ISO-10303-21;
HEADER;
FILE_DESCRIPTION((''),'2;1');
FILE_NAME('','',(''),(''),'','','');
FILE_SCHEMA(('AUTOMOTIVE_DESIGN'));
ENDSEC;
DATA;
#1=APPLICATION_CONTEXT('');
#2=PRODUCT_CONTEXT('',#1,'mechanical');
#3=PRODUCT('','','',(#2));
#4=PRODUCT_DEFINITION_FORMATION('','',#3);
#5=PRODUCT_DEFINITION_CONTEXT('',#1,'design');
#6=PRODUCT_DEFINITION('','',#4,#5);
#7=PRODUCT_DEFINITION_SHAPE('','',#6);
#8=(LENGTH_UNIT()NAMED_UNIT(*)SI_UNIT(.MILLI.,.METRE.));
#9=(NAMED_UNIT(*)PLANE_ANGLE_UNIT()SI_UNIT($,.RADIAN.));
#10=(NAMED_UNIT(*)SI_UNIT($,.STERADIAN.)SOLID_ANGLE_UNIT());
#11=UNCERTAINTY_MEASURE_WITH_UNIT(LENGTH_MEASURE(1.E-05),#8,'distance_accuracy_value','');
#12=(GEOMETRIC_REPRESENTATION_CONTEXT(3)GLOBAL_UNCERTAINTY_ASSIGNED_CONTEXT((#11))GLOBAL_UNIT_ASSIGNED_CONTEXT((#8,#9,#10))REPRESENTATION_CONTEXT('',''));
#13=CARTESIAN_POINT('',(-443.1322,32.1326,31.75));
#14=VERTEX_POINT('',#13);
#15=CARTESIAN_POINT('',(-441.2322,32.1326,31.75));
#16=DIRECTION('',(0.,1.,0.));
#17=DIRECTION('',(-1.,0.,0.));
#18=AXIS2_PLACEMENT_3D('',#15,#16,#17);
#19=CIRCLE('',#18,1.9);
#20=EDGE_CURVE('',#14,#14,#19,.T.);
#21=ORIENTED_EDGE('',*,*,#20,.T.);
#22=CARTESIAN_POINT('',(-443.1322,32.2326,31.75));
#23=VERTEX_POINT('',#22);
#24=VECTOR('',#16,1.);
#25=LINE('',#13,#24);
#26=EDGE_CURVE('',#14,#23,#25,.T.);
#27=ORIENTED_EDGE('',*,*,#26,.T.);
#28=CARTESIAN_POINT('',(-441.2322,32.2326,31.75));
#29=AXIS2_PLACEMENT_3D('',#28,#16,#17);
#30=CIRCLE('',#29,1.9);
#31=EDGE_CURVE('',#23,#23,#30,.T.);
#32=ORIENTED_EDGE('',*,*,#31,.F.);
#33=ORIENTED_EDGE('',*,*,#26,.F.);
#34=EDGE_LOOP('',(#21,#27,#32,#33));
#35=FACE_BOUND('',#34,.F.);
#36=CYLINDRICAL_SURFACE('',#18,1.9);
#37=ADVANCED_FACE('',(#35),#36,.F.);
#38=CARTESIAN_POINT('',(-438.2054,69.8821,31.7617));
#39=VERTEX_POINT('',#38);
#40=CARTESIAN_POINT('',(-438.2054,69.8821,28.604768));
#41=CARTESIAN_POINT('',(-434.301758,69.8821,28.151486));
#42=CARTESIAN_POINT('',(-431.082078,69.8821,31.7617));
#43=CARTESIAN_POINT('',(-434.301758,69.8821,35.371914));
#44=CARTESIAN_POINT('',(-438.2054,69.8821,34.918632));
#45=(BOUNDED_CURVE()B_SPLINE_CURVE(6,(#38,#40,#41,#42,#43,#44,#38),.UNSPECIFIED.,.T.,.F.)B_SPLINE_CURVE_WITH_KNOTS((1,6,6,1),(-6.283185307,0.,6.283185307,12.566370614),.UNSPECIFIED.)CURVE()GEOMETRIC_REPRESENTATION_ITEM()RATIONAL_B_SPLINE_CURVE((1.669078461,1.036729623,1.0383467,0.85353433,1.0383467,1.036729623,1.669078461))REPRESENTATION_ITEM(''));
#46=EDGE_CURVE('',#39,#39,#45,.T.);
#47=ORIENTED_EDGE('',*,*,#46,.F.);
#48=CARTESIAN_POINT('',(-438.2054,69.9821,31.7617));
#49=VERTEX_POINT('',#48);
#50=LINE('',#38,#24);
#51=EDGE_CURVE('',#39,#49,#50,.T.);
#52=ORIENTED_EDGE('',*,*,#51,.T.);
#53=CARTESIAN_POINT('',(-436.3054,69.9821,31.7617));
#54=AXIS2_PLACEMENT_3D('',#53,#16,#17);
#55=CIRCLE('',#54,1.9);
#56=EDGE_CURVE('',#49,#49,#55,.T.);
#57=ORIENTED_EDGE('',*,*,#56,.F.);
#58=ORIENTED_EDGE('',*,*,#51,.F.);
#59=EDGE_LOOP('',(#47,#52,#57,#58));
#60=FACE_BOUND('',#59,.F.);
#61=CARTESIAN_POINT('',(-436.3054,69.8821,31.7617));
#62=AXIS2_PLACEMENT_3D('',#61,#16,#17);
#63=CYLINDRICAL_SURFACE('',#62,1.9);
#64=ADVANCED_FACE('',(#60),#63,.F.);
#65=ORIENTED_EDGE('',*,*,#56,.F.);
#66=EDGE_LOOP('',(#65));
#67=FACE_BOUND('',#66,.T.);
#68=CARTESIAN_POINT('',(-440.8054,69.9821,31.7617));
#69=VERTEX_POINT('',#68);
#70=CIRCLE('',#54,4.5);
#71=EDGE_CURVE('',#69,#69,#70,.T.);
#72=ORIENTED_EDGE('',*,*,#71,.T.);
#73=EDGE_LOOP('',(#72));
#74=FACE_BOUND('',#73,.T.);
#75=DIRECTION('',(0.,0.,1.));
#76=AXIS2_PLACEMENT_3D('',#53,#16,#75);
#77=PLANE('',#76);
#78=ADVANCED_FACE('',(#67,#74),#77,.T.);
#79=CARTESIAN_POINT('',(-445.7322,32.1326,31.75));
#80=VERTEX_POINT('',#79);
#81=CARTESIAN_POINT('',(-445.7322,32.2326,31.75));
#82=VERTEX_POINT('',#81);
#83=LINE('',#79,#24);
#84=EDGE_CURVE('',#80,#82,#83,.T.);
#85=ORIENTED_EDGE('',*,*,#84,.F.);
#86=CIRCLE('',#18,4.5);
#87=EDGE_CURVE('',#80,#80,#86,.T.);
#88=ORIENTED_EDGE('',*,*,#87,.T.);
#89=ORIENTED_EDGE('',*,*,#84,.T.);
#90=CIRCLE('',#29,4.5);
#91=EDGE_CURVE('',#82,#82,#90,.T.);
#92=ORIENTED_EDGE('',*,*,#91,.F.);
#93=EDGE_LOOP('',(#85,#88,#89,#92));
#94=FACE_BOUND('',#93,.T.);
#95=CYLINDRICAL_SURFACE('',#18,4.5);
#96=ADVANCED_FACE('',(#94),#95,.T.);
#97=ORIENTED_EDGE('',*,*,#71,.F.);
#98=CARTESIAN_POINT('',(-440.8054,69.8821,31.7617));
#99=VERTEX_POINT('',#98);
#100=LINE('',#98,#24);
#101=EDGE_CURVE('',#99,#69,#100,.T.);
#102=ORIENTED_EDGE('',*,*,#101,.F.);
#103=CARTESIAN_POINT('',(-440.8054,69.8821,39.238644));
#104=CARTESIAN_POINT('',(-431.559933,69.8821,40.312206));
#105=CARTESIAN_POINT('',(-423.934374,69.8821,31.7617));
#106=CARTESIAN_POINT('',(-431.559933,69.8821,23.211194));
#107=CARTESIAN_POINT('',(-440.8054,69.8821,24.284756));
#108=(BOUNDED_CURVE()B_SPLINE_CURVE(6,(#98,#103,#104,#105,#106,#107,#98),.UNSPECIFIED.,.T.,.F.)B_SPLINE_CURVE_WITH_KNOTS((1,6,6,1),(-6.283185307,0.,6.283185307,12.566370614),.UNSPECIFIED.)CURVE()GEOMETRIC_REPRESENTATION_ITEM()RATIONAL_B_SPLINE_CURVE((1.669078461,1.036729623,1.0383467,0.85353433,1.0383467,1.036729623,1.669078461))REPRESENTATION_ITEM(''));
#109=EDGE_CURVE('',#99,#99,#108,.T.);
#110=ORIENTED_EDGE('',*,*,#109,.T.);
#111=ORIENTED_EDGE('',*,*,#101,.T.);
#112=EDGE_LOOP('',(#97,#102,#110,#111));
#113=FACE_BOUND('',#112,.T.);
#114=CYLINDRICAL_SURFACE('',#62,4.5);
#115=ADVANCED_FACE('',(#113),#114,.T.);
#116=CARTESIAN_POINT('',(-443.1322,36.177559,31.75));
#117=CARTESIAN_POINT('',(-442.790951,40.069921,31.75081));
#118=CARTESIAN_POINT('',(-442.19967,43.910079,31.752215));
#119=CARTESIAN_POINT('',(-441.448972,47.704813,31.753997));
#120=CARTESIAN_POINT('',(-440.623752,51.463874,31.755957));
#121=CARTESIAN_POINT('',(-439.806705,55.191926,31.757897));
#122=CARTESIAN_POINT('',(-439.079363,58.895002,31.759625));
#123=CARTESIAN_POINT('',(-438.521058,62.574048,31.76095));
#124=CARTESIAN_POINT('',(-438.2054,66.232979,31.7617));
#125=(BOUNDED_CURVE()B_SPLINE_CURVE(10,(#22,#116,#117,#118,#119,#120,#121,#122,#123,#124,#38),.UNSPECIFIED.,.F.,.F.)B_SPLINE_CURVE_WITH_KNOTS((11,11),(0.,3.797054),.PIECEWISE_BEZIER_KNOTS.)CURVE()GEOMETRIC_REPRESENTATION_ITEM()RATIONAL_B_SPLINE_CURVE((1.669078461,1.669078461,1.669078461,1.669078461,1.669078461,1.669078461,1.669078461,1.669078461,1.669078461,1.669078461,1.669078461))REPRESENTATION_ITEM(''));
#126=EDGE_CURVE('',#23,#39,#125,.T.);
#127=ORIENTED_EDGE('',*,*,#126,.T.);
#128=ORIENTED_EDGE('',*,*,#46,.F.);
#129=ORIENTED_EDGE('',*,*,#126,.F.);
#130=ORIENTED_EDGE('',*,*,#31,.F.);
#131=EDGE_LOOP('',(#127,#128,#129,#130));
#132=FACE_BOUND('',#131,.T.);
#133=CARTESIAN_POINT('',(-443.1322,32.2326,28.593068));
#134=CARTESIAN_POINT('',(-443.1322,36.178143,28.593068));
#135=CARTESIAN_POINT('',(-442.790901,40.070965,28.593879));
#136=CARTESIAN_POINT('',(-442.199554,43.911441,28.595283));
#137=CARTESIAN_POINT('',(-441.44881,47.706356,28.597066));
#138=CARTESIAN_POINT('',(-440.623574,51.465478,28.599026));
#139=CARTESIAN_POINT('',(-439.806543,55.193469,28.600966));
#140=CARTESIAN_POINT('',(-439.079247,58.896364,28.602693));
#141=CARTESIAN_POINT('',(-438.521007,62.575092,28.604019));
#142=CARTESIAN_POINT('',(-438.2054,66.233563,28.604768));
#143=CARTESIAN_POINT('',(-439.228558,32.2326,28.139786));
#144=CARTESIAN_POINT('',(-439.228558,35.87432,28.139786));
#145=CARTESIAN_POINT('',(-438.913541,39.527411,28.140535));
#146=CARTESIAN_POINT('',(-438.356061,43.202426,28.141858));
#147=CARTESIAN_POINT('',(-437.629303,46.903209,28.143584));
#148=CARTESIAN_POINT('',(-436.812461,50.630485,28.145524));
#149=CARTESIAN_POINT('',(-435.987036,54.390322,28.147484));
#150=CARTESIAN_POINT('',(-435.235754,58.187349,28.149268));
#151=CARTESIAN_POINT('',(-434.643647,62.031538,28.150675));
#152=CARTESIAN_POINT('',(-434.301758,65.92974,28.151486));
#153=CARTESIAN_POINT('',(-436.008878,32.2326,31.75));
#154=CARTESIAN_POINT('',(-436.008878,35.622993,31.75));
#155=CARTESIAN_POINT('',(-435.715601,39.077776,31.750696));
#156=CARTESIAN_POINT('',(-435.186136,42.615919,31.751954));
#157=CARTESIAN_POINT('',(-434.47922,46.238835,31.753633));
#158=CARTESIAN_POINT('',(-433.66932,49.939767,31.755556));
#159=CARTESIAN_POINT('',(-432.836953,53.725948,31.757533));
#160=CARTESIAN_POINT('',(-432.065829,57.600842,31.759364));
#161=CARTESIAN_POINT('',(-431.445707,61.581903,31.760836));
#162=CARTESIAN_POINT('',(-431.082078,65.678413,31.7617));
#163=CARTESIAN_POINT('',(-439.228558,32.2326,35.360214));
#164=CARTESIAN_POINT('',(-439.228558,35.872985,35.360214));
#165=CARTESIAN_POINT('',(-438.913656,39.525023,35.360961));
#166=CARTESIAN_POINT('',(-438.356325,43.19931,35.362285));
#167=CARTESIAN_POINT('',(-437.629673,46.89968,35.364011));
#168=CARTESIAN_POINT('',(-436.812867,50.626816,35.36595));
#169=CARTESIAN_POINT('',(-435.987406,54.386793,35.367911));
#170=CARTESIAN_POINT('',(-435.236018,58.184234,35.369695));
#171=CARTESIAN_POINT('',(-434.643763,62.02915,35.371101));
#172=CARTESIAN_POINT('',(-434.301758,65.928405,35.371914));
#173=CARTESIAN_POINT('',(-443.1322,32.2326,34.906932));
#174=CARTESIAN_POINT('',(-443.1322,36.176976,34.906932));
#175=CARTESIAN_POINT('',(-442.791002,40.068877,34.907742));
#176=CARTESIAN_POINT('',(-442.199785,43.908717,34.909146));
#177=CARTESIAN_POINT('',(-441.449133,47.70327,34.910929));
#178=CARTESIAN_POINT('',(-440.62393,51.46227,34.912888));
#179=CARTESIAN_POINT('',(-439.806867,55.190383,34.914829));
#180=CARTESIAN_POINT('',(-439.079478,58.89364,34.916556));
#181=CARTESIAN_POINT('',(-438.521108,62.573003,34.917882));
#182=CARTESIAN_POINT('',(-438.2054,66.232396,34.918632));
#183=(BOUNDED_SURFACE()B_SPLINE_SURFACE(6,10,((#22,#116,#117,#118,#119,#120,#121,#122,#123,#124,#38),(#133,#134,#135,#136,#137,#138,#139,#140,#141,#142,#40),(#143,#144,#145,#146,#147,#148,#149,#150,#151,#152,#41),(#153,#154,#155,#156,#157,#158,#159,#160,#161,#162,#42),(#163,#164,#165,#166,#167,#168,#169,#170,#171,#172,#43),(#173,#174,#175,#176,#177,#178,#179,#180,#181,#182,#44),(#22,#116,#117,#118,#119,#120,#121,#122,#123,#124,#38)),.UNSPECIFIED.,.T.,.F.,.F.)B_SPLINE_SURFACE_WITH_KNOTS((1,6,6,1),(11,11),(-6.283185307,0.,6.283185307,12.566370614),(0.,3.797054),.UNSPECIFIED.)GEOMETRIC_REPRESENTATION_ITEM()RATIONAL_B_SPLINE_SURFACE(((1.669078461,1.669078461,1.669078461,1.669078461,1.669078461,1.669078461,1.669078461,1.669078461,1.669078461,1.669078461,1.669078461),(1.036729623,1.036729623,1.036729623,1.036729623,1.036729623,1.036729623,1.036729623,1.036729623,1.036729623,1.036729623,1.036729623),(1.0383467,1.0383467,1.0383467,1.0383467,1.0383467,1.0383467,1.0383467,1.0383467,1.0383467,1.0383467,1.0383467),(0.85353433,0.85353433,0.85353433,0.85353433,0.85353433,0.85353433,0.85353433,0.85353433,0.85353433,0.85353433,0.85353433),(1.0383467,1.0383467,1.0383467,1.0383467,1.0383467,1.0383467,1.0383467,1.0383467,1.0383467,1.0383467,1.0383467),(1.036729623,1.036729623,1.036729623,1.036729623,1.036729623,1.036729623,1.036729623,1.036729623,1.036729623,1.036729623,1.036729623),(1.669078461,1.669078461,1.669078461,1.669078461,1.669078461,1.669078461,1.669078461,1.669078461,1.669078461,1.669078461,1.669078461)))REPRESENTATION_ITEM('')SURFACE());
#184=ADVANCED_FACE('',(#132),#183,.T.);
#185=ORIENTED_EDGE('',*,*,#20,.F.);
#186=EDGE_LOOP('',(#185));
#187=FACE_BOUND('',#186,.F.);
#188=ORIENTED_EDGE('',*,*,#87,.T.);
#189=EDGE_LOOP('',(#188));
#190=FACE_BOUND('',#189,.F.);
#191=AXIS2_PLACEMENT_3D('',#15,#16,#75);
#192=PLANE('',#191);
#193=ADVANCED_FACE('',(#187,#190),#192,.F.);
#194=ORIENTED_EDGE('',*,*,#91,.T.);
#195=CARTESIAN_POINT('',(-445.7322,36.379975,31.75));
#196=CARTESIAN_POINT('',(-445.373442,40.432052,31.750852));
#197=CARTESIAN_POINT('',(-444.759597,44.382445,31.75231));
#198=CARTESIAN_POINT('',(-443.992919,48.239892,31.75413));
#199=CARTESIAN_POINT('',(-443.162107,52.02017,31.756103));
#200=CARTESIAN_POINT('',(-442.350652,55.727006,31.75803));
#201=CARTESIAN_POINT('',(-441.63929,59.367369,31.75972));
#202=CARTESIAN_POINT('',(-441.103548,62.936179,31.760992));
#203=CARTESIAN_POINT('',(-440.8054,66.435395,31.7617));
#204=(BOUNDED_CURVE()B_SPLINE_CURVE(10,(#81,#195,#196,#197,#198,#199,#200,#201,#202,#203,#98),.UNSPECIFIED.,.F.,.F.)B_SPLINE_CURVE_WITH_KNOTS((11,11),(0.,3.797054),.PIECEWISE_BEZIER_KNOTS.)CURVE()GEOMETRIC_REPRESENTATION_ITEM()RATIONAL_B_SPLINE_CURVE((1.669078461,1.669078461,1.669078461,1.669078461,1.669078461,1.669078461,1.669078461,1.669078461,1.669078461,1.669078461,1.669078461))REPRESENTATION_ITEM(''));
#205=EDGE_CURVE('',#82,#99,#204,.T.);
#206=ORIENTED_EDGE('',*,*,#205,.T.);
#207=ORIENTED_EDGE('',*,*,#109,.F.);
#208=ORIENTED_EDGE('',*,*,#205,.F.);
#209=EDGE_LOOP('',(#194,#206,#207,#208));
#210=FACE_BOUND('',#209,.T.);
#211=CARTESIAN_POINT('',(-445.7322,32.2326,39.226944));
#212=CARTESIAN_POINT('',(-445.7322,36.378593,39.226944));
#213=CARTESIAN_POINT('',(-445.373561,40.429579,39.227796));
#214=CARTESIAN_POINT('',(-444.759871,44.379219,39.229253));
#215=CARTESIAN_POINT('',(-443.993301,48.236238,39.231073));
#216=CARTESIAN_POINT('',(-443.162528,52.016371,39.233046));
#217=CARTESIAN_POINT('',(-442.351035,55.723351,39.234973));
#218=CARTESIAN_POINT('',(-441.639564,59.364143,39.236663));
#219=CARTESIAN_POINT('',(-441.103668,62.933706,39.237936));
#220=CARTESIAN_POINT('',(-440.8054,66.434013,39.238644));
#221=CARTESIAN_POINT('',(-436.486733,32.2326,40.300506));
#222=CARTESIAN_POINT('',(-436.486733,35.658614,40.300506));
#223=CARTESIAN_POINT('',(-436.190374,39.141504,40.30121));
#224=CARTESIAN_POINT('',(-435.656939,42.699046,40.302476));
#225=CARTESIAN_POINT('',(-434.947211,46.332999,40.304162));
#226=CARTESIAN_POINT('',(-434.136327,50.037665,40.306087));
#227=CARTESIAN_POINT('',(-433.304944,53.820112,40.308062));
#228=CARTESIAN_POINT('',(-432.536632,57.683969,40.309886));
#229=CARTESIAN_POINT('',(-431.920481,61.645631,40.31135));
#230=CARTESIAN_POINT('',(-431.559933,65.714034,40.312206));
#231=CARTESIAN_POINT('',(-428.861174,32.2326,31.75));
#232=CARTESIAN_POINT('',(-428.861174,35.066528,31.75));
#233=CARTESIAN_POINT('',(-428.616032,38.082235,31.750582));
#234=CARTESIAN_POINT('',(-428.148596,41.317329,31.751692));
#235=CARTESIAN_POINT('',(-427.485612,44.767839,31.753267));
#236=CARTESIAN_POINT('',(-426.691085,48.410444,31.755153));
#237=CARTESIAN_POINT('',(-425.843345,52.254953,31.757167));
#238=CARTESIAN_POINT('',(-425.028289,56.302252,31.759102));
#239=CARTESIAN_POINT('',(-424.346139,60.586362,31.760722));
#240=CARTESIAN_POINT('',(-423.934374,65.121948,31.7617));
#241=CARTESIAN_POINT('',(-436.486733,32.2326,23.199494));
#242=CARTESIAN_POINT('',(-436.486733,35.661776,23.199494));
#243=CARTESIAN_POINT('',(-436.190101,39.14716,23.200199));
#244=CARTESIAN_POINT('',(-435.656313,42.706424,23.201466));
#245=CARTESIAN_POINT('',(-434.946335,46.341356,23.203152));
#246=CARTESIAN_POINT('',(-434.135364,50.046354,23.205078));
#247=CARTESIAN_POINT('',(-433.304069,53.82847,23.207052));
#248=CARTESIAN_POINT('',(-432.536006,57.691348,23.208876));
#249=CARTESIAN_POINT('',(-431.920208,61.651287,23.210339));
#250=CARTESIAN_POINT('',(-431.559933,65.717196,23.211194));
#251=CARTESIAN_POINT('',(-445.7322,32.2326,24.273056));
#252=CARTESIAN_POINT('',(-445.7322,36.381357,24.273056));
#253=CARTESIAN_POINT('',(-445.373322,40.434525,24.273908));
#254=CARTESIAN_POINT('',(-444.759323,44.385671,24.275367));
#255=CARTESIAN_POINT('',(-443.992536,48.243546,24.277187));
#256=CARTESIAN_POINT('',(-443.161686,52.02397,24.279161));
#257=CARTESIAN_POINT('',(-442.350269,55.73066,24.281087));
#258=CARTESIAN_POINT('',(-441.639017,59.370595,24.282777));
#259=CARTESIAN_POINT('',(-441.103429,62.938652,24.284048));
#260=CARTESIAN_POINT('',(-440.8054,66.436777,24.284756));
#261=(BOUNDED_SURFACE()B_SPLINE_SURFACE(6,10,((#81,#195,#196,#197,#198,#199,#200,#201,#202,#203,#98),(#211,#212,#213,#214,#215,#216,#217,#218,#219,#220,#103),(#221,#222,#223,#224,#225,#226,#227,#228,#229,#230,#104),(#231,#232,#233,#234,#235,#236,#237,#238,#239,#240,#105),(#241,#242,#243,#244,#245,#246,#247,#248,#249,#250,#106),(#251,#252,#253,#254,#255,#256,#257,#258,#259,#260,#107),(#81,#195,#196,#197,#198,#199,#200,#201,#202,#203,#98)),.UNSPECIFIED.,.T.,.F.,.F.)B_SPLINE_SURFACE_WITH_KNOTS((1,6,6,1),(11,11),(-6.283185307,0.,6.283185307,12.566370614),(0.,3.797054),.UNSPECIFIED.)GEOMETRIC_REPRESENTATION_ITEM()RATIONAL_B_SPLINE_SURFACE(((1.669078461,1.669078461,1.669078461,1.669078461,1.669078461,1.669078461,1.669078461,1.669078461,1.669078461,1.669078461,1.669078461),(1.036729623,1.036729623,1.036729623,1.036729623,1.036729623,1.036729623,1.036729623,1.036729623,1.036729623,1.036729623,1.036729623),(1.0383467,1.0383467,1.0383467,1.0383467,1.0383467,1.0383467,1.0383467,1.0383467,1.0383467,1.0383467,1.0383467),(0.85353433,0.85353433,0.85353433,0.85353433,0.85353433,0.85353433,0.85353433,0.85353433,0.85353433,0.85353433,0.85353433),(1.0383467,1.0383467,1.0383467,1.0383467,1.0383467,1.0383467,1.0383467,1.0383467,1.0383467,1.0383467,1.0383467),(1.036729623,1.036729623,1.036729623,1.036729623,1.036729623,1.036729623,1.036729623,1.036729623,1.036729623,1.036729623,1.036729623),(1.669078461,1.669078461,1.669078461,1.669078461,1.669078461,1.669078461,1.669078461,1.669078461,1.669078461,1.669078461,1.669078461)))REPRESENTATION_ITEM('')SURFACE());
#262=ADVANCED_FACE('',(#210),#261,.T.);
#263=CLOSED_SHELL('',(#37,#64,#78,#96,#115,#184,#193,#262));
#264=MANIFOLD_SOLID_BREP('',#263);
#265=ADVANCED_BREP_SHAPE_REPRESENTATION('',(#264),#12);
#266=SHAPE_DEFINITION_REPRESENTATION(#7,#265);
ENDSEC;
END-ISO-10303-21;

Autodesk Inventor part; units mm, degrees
ref_plane "YZ Plane" through (0, 0, 0) normal (1, 0, 0) x (0, 1, 0)
ref_plane "XZ Plane" through (0, 0, 0) normal (0, 1, 0) x (-1, 0, 0)
ref_plane "XY Plane" through (0, 0, 0) normal (0, 0, 1) x (1, 0, 0)
ref_plane "Work Plane3" through (-441.2322, 32.2326, 31.75) normal (0, 1, 0) x (-1, 0, 0)
sketch "Sketch7" plane through (-441.2322, 32.2326, 31.75) normal (0, 1, 0) x (-1, 0, 0)
  circle A0 centre (0, 0) radius 4.5
  circle A1 centre (0, 0) radius 1.9
sketch3d "3D Sketch1"
  line L0 (-441.2322, 32.1326, 31.75) -> (-441.2322, 32.2326, 31.75)
  spline S0 degree 3 poles (-441.2322, 32.2326, 31.75) (-441.2322, 44.8894, 31.75) (-436.3054, 57.2253, 31.7617) (-436.3054, 69.8821, 31.7617) knots 0 0 0 0 3.797054 3.797054 3.797054 3.797054
  line L1 (-436.3054, 69.8821, 31.7617) -> (-436.3054, 69.9821, 31.7617)
  dimension "d19" = 1
  dimension "d20" = 1
sweep "Sweep1" add profiles "Sketch7" path "3D Sketch1"
equation "\"ID\" = 3.8"
equation "\"OD_\" = 9"
equation "\"L\" = PL"
equation "\"PL\" = 38.035"
equation "\"OD\" = 12.345"
equation "\"RPL\" = 39"
equation "\"OPL\" = 38.035"
equation "\"ROPL\" = 39"
properties material "Rubber"
